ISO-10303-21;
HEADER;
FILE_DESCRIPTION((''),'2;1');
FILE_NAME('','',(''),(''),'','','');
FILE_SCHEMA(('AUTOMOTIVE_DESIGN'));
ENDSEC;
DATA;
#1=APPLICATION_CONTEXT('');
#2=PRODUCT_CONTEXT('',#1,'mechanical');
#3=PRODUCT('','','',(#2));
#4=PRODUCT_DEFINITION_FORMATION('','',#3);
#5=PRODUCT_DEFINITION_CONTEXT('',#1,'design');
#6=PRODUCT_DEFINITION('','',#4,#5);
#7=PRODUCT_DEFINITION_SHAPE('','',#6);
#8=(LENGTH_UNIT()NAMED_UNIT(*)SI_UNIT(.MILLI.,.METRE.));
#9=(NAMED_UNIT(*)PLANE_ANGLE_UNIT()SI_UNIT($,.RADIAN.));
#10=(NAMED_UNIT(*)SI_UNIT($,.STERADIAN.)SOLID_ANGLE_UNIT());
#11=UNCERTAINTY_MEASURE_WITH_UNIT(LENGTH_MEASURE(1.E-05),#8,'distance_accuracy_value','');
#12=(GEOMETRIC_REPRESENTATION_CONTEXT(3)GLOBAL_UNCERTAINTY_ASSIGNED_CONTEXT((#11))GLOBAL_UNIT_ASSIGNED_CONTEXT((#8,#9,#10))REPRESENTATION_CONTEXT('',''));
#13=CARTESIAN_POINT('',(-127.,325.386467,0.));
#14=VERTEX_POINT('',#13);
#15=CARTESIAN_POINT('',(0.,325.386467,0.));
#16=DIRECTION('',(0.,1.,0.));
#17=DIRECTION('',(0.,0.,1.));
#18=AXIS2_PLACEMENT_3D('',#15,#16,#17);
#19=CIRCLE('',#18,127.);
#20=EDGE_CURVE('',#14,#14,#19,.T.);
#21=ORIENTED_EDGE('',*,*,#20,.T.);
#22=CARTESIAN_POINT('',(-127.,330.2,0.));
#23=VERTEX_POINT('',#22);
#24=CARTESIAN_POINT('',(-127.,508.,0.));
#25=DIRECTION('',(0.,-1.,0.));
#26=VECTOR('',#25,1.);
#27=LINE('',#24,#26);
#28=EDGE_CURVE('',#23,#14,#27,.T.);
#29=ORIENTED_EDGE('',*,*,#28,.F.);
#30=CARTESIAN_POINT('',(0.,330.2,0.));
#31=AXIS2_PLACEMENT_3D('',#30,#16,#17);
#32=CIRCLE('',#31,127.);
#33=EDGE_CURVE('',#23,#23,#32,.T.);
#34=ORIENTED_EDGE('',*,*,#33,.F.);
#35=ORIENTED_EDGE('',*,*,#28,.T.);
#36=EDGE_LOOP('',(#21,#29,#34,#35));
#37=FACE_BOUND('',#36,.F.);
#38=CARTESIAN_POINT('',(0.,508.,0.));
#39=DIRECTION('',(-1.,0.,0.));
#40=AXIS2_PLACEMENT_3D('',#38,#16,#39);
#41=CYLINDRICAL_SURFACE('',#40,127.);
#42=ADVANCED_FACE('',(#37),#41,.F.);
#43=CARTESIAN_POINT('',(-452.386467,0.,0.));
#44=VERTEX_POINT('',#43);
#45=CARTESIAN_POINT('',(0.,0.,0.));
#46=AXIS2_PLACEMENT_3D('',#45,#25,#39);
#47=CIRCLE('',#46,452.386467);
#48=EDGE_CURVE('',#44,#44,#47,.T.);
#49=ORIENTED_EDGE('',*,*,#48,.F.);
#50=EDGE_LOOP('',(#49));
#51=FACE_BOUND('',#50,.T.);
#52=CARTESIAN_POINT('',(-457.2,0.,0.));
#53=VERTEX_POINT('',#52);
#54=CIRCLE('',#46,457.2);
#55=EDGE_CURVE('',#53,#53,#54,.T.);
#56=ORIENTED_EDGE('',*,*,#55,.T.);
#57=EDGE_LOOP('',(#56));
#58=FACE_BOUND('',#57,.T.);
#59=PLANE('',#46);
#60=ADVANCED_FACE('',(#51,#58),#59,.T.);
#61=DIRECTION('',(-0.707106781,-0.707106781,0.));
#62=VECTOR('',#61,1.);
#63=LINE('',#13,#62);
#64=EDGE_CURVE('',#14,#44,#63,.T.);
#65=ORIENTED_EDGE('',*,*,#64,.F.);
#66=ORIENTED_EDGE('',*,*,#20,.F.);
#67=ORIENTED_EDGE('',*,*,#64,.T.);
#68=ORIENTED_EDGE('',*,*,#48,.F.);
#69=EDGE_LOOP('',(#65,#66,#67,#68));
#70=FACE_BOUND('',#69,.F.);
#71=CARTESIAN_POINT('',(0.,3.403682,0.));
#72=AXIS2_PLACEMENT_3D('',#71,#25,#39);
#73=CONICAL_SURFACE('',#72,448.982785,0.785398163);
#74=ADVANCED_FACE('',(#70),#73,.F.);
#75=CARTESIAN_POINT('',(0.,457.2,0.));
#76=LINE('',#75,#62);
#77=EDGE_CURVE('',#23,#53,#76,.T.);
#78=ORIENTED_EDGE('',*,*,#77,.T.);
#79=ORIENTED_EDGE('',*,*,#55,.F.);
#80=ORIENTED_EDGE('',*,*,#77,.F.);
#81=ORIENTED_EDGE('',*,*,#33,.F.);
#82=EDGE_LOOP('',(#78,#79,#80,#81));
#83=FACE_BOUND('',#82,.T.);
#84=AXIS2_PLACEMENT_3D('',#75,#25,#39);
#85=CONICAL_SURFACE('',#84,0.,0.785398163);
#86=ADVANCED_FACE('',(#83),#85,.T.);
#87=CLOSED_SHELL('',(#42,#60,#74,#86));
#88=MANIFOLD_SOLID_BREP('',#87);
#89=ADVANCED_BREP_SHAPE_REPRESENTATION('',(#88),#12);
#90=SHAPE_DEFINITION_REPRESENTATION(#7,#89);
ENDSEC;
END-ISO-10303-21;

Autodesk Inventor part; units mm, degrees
ref_plane "YZ Plane" through (0, 0, 0) normal (1, 0, 0) x (0, 1, 0)
ref_plane "XY Plane" through (0, 0, 0) normal (0, 0, 1) x (1, 0, 0)
sketch "Sketch1" plane through (0, 0, 0) normal (0, 0, 1) x (1, 0, 0)
  line L0 (-457.2, 0) -> (0, 457.2)
  line L1 (-457.2, 0) -> (-46.77397, 0) construction
  line L2 (0, 452.386467) -> (-448.982785, 3.403682)
  line L3 (-448.982785, 3.403682) -> (-452.386467, 0)
  line L4 (-457.2, 0) -> (-452.386467, 0)
  line L5 (0, 457.2) -> (0, 452.386467)
  line L6 (0, 452.386467) -> (0, 0) construction
  point P0 (0, 0)
  dimension "d0" = 0
  dimension "d1" = 45
sketch "Sketch1 outline for Revolution1" plane through (0, 0, 0) normal (0, 0, 1) x (1, 0, 0)
  line L0 (0, 452.386467) -> (0, 457.2)
  line L1 (-448.982785, 3.403682) -> (0, 452.386467)
  line L2 (-452.386467, 0) -> (-448.982785, 3.403682)
  line L3 (-457.2, 0) -> (-452.386467, 0)
  line L4 (0, 457.2) -> (-457.2, 0)
revolve "Revolution1" add sketch "Sketch1 outline for Revolution1" angle 360 about axis through (0, 457.2, 0) along (0, -1, 0)
ref_plane "Work Plane1" through (0, 508, 0) normal (0, 1, 0) x (-1, 0, 0)
sketch "Sketch5" plane through (0, 508, 0) normal (0, 1, 0) x (-1, 0, 0)
  circle A0 centre (0, 0) radius 127
  dimension "d7" = 254
sketch "Sketch5 outline for Extrusion2" plane through (0, 508, 0) normal (0, 1, 0) x (-1, 0, 0)
  circle A0 centre (0, 0) radius 127
extrude "Extrusion2" cut sketch "Sketch5 outline for Extrusion2" against normal blind 508
properties part number "2r5scs" material "Glass"
